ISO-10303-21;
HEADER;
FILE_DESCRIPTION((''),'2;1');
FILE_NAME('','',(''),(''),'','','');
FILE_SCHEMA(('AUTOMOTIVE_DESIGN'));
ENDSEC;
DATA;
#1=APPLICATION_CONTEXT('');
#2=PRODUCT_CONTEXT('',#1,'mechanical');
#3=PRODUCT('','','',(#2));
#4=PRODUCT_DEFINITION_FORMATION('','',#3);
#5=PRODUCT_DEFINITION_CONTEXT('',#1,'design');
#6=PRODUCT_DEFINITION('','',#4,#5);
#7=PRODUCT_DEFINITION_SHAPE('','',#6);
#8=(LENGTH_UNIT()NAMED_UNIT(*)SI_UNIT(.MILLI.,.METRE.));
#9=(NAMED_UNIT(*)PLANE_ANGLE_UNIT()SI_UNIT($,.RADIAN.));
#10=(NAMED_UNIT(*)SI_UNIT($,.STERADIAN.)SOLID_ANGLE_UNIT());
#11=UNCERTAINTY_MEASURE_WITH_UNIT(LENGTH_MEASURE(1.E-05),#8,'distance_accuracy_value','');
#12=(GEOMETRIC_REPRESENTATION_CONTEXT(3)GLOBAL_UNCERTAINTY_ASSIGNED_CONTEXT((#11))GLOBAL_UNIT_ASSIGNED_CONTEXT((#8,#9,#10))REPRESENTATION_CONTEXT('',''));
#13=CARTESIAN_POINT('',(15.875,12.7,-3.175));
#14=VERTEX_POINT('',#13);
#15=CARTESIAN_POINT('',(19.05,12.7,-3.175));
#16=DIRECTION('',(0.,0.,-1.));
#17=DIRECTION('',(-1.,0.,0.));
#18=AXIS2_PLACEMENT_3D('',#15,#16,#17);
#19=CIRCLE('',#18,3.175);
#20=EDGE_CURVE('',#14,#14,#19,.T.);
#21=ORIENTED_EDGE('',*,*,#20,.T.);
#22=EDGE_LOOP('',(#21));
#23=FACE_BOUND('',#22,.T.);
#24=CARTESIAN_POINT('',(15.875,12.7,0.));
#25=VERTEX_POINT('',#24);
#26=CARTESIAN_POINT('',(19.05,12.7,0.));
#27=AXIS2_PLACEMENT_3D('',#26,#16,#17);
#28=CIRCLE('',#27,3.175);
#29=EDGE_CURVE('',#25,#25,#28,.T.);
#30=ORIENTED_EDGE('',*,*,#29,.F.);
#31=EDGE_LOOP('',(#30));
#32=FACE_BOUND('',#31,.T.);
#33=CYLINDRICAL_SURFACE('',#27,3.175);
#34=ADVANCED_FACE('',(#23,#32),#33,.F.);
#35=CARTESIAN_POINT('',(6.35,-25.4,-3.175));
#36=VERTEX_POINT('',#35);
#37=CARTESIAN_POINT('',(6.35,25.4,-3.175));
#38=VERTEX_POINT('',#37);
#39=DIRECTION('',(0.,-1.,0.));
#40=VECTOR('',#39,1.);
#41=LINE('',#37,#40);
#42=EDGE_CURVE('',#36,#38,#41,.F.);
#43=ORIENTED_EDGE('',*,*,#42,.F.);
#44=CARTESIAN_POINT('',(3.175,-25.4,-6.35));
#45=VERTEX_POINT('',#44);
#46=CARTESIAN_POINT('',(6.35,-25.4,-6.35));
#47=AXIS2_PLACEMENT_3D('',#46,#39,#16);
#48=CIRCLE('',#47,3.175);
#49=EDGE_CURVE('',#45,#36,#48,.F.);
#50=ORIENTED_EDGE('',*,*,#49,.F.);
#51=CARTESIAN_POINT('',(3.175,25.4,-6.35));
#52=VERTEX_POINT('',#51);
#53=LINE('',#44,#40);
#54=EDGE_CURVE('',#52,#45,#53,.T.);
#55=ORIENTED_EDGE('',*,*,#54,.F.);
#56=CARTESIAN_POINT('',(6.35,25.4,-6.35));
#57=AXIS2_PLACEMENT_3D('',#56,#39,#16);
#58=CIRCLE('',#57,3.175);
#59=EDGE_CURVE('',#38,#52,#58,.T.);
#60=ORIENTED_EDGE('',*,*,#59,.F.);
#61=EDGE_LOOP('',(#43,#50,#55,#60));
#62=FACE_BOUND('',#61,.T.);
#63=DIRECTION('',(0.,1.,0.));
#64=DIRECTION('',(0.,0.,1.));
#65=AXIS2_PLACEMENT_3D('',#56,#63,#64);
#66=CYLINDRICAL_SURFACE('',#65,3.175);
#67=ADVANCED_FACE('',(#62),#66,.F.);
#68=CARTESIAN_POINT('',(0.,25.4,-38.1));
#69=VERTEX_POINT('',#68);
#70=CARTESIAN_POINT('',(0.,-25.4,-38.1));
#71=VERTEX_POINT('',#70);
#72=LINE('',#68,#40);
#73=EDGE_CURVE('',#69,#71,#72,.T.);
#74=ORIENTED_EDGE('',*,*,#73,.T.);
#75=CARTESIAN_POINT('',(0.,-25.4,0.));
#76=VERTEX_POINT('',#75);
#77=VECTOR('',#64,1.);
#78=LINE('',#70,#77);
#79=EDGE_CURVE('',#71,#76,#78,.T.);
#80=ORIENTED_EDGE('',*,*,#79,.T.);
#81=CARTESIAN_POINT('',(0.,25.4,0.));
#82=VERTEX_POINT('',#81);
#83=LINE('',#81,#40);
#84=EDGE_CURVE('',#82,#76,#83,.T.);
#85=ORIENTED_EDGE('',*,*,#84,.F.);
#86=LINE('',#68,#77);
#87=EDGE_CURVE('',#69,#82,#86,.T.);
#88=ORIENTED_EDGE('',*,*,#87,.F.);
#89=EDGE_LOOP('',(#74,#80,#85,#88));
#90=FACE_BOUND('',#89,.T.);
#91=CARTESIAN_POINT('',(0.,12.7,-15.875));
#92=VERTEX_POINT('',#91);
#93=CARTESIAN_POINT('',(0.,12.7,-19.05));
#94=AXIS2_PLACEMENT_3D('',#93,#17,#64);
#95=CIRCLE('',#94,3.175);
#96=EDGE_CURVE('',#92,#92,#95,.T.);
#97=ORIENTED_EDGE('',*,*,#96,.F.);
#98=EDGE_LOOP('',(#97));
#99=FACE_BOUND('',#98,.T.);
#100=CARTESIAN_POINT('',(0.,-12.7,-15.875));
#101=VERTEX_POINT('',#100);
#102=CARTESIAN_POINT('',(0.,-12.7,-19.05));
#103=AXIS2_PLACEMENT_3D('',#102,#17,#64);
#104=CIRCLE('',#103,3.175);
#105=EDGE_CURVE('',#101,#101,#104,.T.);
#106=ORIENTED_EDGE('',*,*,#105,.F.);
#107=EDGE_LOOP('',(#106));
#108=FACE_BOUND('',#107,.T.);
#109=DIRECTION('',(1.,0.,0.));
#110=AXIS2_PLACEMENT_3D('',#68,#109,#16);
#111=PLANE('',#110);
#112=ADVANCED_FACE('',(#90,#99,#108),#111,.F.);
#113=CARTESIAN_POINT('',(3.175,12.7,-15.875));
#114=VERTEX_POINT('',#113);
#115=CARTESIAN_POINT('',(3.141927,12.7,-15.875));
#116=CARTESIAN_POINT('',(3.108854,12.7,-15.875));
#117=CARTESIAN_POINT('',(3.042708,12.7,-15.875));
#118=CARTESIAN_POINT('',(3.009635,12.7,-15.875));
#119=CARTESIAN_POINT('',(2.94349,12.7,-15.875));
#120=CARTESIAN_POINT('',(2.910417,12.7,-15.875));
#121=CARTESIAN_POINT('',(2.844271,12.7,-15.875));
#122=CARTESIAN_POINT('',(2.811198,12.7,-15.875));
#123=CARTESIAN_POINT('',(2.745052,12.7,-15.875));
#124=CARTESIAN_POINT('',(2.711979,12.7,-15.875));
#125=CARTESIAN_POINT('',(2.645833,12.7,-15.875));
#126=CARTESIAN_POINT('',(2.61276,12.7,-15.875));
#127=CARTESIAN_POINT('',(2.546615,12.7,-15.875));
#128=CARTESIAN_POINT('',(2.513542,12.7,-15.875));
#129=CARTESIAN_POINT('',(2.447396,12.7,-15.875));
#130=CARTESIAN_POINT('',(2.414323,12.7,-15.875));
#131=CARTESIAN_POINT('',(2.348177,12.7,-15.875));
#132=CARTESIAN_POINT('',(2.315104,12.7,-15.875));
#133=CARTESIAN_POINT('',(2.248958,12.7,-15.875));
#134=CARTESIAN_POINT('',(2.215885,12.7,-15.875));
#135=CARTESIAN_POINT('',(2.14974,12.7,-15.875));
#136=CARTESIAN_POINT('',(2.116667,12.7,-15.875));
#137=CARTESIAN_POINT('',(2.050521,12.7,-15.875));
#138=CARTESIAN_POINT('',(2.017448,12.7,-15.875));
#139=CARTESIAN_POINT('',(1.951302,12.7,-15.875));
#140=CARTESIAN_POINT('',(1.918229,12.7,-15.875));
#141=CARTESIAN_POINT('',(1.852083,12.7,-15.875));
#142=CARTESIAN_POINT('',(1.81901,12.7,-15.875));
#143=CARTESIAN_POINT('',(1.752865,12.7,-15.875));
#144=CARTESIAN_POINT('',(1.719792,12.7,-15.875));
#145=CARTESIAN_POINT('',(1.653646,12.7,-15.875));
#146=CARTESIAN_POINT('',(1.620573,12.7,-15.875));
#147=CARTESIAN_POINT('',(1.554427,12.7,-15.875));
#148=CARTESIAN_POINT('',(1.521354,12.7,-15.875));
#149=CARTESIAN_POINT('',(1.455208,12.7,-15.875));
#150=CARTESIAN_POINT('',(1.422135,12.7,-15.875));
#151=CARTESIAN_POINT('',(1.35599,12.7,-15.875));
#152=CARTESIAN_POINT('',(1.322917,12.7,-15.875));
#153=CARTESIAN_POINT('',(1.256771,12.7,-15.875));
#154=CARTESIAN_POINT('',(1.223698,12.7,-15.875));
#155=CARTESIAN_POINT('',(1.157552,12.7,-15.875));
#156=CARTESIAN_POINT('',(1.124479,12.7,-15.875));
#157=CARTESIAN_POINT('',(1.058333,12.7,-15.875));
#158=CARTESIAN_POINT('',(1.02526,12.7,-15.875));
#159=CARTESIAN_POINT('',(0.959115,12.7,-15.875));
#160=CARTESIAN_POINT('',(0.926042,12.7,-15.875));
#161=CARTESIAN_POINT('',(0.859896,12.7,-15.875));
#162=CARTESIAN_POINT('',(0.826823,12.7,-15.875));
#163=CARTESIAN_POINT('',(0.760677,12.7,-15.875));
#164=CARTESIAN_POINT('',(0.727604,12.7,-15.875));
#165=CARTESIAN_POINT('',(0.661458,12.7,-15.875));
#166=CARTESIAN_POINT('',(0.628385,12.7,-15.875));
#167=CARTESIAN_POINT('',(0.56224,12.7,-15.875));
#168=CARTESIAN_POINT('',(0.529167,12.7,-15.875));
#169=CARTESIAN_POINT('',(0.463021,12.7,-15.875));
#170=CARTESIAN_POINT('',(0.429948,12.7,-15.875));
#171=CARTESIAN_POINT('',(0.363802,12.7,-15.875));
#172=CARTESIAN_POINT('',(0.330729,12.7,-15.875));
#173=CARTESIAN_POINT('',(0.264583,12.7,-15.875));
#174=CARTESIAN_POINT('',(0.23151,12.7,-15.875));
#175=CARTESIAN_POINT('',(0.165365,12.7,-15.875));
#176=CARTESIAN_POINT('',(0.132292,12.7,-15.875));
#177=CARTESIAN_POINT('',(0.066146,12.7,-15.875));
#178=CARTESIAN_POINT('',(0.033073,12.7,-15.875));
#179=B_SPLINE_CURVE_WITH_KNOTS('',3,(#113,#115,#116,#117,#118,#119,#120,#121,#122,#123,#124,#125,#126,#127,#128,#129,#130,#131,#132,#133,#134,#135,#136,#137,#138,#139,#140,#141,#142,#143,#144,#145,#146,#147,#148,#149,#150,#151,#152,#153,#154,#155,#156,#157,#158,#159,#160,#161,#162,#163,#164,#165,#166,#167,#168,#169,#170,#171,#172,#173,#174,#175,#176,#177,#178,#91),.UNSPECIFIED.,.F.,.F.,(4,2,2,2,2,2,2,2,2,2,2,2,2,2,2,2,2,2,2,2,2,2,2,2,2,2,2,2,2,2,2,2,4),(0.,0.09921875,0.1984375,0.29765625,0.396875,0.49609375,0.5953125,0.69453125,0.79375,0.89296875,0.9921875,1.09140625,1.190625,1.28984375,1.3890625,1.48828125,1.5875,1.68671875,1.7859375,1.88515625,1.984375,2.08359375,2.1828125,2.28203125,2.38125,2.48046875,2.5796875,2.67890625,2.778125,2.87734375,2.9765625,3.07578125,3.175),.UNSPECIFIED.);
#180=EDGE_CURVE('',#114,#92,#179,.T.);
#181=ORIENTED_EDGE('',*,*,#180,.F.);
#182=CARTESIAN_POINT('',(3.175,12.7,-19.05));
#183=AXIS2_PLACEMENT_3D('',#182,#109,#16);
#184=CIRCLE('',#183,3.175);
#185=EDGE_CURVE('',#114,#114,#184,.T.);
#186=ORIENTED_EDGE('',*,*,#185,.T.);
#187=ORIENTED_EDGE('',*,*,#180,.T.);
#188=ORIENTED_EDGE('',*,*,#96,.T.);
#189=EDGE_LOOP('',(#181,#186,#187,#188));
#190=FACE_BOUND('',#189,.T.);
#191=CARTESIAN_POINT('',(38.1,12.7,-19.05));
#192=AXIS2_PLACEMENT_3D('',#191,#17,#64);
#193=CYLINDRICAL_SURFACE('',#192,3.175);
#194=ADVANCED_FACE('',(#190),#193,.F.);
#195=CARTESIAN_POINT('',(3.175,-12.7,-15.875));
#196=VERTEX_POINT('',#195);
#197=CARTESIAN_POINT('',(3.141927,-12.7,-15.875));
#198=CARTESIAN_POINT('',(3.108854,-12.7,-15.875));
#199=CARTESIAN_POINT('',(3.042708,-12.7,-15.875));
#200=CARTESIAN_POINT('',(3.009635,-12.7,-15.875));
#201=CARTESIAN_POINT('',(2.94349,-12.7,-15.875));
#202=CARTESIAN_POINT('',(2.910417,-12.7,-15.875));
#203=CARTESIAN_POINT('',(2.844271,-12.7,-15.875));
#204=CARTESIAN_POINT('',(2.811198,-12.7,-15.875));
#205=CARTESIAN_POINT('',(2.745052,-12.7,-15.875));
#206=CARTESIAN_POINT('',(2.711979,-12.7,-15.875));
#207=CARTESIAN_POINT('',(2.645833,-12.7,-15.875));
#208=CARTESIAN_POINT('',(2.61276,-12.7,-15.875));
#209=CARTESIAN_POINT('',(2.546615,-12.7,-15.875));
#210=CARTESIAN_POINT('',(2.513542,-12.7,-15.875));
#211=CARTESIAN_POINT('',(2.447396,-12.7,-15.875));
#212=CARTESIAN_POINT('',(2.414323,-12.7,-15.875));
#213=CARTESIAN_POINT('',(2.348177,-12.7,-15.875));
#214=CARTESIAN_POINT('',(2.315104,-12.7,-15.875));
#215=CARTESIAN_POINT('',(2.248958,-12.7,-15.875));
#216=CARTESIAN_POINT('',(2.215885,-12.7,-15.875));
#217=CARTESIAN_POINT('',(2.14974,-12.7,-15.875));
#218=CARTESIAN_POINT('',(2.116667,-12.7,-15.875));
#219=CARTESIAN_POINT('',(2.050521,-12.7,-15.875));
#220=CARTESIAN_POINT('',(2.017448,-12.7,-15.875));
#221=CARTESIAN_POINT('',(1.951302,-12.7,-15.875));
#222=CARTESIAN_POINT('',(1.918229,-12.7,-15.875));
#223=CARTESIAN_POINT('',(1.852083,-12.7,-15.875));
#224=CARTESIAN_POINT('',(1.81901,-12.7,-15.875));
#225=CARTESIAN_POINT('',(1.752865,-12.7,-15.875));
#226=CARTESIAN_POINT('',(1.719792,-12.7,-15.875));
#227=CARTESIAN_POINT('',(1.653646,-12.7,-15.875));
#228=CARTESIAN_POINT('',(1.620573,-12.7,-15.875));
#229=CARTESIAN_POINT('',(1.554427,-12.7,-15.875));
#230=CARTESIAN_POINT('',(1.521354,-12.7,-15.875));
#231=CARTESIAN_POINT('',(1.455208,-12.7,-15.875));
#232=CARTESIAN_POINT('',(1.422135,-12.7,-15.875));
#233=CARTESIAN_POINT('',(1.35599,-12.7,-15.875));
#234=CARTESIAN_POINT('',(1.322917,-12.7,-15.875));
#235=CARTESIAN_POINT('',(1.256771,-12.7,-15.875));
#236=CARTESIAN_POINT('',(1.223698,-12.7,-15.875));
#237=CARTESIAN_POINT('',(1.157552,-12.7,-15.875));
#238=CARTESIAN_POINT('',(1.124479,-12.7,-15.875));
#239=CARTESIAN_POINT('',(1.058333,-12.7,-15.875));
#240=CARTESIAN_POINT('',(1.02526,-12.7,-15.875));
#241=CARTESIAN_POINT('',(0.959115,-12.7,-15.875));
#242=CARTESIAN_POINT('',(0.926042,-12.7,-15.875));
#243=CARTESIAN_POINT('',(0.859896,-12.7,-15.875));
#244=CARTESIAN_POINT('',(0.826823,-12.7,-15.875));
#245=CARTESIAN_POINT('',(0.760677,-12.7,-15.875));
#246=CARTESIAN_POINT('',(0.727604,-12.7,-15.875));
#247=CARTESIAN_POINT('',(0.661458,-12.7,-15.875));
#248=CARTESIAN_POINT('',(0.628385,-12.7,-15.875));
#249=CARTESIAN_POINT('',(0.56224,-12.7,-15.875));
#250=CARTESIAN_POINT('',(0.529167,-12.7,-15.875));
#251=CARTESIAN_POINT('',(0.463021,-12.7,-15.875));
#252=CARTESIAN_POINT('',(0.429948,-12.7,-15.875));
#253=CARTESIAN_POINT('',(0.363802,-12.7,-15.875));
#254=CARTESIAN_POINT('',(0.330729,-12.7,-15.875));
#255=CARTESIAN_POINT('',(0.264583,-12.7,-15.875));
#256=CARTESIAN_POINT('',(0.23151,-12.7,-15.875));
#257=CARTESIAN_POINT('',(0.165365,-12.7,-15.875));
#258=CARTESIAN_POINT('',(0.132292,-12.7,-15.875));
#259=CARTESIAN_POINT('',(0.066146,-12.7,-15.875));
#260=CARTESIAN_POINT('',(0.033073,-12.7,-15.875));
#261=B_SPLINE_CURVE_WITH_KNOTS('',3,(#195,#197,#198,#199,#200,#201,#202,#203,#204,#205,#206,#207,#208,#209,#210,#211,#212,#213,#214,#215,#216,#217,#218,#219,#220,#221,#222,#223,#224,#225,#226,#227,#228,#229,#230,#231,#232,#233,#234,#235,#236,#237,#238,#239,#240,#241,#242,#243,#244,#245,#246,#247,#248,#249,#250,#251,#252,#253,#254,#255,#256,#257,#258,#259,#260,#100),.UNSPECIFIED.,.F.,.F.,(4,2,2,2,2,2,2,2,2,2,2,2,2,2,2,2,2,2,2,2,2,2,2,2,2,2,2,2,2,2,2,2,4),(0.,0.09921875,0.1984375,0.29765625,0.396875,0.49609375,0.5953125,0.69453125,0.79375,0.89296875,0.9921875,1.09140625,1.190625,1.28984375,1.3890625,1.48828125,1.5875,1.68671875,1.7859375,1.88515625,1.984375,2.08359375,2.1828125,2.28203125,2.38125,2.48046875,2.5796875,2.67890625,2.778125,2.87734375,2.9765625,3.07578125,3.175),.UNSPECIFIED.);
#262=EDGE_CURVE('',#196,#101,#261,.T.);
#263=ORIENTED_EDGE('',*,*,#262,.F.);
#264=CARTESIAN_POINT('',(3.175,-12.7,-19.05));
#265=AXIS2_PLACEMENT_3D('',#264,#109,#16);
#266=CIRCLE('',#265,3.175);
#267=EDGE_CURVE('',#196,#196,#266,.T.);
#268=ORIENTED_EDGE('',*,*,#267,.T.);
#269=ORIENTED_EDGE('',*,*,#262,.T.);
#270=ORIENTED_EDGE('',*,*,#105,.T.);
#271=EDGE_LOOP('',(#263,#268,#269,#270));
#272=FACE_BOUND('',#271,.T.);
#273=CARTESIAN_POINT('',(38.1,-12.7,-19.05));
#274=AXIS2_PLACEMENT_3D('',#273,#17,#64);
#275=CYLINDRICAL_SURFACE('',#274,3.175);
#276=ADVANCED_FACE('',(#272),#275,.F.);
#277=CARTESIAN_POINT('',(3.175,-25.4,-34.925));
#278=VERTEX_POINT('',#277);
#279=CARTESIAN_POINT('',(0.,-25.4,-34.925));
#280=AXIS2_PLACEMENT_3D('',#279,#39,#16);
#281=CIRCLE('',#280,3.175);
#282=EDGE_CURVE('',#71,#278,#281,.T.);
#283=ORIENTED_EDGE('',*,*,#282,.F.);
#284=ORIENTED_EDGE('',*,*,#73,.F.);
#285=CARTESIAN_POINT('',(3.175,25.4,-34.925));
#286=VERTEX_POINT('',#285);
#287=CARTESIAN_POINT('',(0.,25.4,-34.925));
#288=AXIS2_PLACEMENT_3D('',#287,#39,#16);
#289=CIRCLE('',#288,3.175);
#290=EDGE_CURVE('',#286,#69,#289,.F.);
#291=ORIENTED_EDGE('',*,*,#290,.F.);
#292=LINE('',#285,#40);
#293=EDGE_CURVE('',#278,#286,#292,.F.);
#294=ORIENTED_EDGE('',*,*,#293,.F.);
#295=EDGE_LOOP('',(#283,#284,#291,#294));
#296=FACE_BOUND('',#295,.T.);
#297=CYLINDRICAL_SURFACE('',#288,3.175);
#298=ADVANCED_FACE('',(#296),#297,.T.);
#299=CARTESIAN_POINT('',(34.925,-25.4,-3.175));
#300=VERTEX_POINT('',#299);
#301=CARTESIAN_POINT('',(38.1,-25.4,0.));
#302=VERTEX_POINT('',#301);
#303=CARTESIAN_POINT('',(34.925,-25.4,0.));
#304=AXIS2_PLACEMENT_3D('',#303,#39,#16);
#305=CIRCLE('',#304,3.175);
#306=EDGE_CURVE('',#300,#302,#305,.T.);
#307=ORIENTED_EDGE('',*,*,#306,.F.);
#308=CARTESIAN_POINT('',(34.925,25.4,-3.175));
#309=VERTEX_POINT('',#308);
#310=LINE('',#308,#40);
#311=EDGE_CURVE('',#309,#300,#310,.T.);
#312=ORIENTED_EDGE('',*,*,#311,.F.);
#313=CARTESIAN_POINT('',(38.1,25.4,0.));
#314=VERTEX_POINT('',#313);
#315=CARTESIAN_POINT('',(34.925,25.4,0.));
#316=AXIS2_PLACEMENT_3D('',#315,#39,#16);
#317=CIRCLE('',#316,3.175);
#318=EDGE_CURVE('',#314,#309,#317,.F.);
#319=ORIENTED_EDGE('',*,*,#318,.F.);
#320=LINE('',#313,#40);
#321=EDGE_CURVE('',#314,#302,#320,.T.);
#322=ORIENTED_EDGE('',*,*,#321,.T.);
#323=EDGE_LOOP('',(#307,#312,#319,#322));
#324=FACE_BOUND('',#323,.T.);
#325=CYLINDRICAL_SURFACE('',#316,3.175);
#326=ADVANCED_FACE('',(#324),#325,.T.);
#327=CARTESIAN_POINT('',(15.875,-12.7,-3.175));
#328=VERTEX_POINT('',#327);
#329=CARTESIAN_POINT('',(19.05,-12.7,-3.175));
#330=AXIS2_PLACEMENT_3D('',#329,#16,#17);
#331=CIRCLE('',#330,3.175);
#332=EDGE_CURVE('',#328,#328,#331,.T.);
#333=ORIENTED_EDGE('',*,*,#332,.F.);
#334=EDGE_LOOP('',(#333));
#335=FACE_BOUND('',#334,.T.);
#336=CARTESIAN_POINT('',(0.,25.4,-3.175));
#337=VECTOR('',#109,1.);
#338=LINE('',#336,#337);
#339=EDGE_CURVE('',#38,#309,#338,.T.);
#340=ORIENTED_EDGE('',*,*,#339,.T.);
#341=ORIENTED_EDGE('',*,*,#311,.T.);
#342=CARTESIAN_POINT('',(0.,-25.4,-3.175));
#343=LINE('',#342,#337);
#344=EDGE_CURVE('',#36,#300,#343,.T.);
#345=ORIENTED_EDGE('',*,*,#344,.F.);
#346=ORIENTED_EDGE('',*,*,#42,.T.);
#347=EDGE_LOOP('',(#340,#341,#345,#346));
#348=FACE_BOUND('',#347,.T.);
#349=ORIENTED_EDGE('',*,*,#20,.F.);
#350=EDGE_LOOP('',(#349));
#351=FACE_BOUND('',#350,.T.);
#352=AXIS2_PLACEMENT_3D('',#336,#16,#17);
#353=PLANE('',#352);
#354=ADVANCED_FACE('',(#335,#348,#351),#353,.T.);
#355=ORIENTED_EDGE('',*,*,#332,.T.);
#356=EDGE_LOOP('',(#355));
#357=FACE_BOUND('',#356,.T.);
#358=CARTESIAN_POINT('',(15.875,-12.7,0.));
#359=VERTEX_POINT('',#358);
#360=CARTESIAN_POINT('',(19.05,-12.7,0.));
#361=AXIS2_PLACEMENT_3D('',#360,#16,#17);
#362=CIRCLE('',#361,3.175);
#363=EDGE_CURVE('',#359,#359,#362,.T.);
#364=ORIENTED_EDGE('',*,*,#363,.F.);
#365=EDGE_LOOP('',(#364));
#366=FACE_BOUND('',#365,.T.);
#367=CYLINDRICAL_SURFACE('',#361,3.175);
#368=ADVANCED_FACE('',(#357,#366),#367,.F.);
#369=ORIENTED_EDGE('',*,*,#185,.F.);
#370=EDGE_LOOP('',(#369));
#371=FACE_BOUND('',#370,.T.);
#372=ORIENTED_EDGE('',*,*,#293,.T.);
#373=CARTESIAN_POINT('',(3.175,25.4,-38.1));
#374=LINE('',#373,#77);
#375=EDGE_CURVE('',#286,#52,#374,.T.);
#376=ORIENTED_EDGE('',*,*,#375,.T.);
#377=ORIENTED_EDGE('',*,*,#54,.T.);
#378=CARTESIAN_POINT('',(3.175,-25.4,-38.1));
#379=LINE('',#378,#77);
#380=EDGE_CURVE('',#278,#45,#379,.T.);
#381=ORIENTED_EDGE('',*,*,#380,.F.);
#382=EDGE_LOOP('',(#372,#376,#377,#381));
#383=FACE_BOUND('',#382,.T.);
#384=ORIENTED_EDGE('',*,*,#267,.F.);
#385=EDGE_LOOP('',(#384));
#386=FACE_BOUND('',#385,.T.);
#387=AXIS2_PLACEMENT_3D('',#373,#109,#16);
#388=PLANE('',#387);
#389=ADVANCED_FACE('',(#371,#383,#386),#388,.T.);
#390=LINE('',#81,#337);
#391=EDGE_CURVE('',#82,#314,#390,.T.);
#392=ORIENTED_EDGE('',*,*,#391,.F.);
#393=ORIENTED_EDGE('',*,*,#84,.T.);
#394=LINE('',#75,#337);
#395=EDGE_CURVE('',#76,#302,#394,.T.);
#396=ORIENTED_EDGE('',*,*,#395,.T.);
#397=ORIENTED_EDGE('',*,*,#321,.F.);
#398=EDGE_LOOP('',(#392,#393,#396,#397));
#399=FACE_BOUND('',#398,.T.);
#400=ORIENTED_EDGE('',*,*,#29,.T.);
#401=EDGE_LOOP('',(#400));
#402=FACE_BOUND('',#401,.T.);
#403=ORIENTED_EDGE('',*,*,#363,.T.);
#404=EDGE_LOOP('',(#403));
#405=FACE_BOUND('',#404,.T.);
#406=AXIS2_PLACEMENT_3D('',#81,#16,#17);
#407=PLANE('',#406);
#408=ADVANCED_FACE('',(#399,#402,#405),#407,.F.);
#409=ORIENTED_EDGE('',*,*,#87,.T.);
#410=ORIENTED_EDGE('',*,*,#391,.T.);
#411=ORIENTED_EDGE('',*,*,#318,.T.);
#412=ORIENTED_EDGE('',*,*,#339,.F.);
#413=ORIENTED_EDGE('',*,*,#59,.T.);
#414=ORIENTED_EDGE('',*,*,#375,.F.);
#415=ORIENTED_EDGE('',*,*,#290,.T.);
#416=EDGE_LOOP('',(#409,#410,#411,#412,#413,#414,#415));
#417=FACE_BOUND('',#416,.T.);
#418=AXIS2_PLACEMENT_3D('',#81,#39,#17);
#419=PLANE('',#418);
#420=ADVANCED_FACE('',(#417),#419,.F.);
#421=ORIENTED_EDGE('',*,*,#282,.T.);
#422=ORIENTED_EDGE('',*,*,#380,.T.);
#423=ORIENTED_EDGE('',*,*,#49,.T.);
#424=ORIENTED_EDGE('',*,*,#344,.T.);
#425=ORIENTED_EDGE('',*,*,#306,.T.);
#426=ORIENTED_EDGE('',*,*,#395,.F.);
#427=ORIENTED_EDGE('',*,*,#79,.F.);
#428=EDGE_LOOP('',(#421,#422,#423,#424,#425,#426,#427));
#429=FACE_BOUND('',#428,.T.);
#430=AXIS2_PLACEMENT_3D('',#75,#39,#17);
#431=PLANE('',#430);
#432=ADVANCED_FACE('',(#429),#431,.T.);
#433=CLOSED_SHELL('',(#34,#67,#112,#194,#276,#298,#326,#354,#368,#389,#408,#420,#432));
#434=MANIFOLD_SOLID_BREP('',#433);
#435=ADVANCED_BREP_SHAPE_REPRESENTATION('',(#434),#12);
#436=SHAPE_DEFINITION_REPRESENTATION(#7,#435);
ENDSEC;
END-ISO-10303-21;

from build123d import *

# Parameters (mm, degrees)
EXTRUDE_THIN1_DEPTH = 25.4
FILLET1_R           = 3.175
SKETCH2_R           = 3.175
CUT_EXTRUDE1_DEPTH  = 58.589283942
SKETCH3_R           = 3.175
CUT_EXTRUDE2_DEPTH  = 60.56828015


with BuildPart() as part:
    # Sketch1 → Extrude-Thin1 (new, symmetric)
    with BuildSketch(Plane(origin=(0, 0, 0), x_dir=(1, 0, 0), z_dir=(0, 1, 0))):
        Polygon((0, 38.1), (0, 0), (38.1, 0), (38.1, 3.175), (3.175, 3.175), (3.175, 38.1), align=None)
    extrude(amount=EXTRUDE_THIN1_DEPTH, both=True)

    # Fillet1
    fillet1_edges = [part.edges().sort_by_distance(p)[0] for p in [
        (3.175, 0, -3.175),
        (38.1, 0, -3.175),
        (3.175, 0, -38.1),
    ]]
    fillet(fillet1_edges, radius=FILLET1_R - 0.0001)  # a hair under: the kernel refuses the full size

    # Sketch2 → Cut-Extrude1 (cut, through all)
    with BuildSketch(Plane(origin=(0, 0, -3.175), x_dir=(-1, 0, 0), z_dir=(0, 0, -1))):
        with Locations((-19.05, 12.7)):
            Circle(SKETCH2_R)
        with Locations((-19.05, -12.7)):
            Circle(SKETCH2_R)
    extrude(amount=-CUT_EXTRUDE1_DEPTH, mode=Mode.SUBTRACT)

    # Sketch3 → Cut-Extrude2 (cut, through all)
    with BuildSketch(Plane.ZY):
        with Locations((-19.05, 12.7)):
            Circle(SKETCH3_R)
        with Locations((-19.05, -12.7)):
            Circle(SKETCH3_R)
    extrude(amount=-CUT_EXTRUDE2_DEPTH, mode=Mode.SUBTRACT)


solid = part.part
